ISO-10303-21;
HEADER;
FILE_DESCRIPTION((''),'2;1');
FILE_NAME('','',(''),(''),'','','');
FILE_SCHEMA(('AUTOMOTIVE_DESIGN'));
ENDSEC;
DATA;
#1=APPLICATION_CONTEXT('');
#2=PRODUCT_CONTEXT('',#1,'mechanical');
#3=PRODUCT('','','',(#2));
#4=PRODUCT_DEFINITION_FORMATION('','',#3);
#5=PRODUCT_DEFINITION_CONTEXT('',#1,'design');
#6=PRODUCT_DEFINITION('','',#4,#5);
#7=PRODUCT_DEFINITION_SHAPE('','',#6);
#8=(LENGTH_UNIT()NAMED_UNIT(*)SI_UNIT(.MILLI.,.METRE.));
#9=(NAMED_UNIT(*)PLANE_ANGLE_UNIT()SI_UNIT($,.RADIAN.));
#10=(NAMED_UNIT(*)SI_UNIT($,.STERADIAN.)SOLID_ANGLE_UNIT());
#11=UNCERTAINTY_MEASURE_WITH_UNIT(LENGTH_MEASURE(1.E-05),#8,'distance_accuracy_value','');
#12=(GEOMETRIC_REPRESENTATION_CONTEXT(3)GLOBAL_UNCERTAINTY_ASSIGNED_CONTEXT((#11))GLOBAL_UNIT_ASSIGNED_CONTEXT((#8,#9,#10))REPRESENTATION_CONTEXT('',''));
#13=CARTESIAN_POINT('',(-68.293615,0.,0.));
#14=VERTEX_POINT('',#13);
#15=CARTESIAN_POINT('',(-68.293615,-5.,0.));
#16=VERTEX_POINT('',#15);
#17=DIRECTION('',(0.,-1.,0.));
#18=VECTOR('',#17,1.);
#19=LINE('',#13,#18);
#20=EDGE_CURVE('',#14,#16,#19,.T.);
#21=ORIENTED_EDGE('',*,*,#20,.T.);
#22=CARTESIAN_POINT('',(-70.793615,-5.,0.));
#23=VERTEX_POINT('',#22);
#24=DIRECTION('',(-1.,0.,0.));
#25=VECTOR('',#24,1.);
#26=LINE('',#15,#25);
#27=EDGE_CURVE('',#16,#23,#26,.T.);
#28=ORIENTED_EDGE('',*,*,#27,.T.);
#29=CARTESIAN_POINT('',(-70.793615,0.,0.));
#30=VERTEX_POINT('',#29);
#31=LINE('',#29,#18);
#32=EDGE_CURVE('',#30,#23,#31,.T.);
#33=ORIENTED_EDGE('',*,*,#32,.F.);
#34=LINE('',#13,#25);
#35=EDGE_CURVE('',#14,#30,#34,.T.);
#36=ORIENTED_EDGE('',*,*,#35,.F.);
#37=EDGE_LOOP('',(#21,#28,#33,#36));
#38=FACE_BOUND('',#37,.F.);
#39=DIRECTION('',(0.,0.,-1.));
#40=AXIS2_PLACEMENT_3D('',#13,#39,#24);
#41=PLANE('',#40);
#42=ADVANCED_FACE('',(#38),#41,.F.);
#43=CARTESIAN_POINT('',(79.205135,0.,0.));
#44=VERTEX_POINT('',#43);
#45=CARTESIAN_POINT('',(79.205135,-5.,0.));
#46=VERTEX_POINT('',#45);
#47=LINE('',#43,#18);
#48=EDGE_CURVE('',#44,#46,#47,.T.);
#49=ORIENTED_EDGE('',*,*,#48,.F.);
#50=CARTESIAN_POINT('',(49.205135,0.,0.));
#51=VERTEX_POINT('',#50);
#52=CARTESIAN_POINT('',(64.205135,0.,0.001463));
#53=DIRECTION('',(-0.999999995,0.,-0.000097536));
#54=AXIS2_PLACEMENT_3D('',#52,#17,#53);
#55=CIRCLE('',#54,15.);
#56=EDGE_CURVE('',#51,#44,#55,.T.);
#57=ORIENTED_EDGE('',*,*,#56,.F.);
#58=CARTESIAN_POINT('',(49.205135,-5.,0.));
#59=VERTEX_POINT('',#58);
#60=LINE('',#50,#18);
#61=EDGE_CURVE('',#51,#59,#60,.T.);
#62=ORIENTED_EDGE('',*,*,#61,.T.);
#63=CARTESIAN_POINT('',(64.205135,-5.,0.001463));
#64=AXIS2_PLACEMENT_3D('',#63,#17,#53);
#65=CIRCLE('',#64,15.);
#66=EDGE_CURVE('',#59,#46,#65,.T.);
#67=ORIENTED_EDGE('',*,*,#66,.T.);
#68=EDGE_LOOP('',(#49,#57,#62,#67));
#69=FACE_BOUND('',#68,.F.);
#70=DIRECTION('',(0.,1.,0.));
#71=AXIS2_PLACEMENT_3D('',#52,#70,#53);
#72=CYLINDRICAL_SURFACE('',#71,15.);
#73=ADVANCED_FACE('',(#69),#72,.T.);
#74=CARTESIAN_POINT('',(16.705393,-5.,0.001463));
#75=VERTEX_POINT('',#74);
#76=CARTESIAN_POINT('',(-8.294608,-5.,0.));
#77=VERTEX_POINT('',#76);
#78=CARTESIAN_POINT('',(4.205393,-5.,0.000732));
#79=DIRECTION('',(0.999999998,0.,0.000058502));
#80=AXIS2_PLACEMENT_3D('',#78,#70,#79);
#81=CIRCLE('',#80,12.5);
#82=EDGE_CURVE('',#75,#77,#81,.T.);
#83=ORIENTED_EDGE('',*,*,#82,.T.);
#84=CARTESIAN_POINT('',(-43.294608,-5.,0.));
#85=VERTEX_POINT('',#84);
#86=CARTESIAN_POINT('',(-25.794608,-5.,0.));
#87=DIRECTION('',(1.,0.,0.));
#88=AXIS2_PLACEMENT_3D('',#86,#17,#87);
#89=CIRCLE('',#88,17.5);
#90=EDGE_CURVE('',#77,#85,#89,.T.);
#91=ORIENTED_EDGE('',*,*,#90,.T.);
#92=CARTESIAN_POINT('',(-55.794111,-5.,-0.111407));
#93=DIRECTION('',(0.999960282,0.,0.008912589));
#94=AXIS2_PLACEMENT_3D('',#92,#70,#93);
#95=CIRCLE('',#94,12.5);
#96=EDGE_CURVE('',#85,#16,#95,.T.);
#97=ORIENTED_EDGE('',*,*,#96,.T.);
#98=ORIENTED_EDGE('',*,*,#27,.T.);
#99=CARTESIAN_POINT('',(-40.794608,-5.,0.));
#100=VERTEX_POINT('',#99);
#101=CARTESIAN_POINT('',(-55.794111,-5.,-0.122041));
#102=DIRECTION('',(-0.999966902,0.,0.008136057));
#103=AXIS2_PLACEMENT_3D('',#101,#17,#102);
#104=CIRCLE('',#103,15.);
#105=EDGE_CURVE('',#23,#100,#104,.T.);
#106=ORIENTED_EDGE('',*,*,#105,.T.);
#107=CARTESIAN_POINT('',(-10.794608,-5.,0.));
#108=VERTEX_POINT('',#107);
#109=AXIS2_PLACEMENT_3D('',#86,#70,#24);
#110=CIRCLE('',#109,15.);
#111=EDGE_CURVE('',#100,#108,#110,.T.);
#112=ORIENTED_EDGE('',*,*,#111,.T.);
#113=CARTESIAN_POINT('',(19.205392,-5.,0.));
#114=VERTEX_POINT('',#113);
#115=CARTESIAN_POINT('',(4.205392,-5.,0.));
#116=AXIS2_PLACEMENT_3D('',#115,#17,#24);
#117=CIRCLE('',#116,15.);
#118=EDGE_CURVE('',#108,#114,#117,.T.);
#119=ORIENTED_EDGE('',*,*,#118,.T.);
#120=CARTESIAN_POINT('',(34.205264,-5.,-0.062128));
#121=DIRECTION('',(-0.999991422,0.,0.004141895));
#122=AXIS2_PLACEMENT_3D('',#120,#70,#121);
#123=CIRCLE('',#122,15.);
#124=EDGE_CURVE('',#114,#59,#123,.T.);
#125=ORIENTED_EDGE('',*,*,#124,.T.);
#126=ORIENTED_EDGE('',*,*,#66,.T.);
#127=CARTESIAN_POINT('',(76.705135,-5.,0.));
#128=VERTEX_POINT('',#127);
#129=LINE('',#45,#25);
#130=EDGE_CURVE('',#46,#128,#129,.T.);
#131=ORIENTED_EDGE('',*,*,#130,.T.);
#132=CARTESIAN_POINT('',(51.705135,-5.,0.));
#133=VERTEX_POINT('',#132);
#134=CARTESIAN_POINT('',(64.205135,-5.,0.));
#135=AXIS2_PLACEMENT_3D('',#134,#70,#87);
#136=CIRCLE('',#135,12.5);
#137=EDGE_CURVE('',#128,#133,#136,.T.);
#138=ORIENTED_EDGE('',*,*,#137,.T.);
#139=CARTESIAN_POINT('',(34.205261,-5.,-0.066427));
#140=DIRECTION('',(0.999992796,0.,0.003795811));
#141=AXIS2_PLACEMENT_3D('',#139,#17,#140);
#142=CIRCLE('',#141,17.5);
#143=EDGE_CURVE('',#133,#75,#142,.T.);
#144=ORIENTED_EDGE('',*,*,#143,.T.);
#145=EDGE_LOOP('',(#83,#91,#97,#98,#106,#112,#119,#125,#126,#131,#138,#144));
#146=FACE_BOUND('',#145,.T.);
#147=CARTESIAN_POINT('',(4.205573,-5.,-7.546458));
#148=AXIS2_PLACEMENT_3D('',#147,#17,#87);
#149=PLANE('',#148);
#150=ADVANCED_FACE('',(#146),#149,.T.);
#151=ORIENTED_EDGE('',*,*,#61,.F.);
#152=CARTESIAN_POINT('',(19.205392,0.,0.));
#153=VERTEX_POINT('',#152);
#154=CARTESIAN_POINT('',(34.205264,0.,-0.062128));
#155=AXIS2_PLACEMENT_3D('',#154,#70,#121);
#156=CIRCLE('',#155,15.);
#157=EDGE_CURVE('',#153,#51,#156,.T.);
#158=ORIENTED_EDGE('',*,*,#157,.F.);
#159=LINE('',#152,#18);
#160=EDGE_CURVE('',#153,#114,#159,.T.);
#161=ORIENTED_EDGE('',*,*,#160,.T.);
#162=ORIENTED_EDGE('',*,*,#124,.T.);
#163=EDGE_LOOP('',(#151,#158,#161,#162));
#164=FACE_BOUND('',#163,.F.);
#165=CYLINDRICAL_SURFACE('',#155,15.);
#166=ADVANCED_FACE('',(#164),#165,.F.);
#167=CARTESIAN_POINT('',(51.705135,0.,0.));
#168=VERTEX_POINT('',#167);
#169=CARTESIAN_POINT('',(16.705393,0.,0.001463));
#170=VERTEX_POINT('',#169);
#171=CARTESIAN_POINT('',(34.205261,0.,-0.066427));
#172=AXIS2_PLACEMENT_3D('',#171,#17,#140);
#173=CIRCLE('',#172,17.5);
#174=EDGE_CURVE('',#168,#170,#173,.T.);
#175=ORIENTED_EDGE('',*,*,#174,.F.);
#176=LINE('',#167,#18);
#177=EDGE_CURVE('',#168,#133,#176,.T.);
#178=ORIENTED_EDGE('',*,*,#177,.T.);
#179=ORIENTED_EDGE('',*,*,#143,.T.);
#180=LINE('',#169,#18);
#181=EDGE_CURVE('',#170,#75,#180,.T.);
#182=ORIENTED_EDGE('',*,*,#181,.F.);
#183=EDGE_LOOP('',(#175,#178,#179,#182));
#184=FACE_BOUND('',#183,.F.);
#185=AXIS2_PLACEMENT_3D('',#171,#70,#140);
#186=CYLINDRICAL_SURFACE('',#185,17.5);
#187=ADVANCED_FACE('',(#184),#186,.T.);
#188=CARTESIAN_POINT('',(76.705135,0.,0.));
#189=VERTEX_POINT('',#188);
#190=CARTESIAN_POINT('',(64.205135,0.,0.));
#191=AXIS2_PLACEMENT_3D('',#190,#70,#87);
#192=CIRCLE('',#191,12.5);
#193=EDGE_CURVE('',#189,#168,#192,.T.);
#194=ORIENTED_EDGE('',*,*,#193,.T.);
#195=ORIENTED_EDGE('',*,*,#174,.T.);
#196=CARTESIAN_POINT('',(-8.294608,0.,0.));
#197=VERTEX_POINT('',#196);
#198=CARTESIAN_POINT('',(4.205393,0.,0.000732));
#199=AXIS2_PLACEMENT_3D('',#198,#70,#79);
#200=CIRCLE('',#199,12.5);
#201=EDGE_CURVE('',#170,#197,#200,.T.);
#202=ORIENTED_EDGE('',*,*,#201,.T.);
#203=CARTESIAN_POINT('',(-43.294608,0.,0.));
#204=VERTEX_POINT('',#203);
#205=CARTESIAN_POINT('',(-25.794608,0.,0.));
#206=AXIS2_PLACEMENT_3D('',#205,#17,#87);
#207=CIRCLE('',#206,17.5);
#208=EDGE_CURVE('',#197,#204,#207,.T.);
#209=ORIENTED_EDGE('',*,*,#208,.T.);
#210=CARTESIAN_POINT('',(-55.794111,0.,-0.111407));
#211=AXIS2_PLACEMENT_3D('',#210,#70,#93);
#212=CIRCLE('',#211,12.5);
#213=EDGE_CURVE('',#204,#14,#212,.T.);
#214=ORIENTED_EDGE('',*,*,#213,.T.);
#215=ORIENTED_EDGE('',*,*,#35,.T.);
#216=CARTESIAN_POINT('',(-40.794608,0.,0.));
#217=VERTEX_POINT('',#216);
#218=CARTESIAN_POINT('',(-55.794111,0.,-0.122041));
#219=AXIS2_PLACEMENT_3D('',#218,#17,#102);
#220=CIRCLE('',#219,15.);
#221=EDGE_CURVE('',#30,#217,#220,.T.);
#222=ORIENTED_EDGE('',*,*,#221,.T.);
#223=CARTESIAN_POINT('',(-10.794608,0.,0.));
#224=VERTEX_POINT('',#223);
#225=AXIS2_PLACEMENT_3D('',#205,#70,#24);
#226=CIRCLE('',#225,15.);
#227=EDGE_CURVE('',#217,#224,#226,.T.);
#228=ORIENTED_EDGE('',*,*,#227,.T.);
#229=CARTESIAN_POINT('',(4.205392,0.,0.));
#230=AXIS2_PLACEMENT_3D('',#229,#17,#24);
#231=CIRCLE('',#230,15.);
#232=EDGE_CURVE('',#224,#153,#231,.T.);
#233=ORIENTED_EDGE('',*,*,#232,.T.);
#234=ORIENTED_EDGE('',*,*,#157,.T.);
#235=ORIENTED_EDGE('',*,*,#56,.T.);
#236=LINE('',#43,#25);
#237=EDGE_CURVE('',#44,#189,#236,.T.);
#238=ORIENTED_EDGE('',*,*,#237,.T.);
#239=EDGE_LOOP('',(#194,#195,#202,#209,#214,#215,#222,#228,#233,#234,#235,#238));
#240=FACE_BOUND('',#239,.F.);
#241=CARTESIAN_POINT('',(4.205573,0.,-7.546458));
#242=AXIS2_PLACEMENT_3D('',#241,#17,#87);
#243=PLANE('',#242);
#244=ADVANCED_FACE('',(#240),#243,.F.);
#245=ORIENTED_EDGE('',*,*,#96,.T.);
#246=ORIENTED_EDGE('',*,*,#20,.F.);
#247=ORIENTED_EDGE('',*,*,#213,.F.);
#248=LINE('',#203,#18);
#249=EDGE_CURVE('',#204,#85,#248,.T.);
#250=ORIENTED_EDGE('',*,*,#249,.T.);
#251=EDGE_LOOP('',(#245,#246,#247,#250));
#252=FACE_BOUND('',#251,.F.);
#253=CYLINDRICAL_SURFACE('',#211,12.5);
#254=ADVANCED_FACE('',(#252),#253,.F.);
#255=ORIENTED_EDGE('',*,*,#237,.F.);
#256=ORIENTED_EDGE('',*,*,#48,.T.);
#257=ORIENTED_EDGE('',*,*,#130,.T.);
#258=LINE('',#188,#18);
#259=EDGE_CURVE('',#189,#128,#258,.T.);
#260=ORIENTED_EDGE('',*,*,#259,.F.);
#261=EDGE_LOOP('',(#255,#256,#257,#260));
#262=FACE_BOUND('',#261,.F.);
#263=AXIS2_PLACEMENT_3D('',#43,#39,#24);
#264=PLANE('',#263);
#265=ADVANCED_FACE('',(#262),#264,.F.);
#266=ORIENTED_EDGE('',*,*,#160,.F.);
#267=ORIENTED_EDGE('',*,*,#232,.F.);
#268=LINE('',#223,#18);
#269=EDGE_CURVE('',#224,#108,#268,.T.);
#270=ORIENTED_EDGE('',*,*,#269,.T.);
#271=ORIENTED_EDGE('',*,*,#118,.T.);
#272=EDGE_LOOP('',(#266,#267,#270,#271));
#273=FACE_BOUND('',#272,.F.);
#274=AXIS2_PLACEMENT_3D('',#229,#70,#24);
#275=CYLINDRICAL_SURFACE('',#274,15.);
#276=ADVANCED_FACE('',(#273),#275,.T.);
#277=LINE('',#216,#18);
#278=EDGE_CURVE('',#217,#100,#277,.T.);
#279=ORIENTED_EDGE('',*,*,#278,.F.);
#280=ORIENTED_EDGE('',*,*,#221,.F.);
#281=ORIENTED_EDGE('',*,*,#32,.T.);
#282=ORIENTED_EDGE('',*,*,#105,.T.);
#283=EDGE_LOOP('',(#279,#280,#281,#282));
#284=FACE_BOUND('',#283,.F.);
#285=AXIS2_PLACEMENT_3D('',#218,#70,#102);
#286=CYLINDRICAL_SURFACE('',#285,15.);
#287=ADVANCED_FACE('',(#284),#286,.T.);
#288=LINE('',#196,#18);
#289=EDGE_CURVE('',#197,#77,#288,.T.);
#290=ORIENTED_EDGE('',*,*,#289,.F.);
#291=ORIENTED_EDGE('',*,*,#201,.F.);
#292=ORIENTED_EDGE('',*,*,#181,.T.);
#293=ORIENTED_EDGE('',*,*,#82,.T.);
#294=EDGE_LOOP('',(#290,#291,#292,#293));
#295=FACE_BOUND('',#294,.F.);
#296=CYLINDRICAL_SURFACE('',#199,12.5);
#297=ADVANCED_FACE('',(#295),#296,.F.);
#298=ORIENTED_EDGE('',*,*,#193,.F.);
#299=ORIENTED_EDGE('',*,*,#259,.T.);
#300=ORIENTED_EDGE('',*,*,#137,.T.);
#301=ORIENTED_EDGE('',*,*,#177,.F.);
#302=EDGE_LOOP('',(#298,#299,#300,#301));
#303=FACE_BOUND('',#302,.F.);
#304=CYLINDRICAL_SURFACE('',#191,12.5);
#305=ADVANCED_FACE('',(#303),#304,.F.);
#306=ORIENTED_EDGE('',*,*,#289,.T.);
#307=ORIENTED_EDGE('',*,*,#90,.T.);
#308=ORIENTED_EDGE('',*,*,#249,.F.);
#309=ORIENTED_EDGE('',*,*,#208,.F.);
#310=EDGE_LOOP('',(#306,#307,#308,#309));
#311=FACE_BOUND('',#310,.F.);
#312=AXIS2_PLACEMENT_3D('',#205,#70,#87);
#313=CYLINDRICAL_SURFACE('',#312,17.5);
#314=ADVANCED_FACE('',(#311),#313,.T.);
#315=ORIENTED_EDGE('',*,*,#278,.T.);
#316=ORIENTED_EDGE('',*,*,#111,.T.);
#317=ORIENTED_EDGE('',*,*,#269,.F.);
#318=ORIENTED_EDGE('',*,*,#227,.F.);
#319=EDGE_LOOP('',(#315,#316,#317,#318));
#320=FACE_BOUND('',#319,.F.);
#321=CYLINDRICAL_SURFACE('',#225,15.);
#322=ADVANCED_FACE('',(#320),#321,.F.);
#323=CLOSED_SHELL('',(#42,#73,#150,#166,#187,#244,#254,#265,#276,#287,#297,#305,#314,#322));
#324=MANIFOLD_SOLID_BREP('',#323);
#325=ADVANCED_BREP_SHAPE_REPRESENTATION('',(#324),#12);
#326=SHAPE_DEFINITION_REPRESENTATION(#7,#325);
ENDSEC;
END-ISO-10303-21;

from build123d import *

# Parameters (mm, degrees)
F1_DEPTH = 5


# Not quite as in the source:
# - ends of sketch curves that miss each other by under 0.0002 mm in the source are joined


with BuildPart() as f1:
    # F0 (on Front) → F1 (new body)
    with BuildSketch(Plane.XZ):
        with BuildLine():
            Line((-8.2946076301, 0), (-10.7946076301, 0))
            ThreePointArc((-10.7946076301, 0), (4.2053923699, -15), (19.2053923699, 0))
            Line((19.2053923699, 0), (16.705392798, 0.0014630326))
            ThreePointArc((16.705392798, 0.0014630326), (4.2061241002, -12.4992684623), (-8.2946076301, 0))
        make_face()
        with BuildLine():
            ThreePointArc((-40.7946076301, 0), (-25.7946076301, 15), (-10.7946076301, 0))
            Line((-10.7946076301, 0), (-8.2946076301, 0))
            ThreePointArc((-8.2946076301, 0), (-25.7946076301, 17.5), (-43.2946076301, 0))
            Line((-43.2946076301, 0), (-40.7946076301, 0))
        make_face()
        with BuildLine():
            ThreePointArc((-70.7936146824, 0), (-55.7941111563, -15.1220408499), (-40.7946076301, 0))
            Line((-40.7946076301, 0), (-43.2946076301, 0))
            ThreePointArc((-43.2946076301, 0), (-55.7941111563, -12.6114073597), (-68.2936146824, 0))
            Line((-68.2936146824, 0), (-70.7936146824, 0))
        make_face()
        with BuildLine():
            Line((16.705392798, 0.0014630326), (19.2053923699, 0))
            ThreePointArc((19.2053923699, 0), (34.2052637046, 14.9378715725), (49.2051350393, 0))
            Line((49.2051350393, 0), (51.7051350393, 0))
            ThreePointArc((51.7051350393, 0), (34.205992633, 17.4335732975), (16.705392798, 0.0014630326))
        make_face()
        with BuildLine():
            Line((51.7051350393, 0), (49.2051350393, 0))
            ThreePointArc((49.2051350393, 0), (50.4551350393, -0.0521740711), (51.7051350393, 0))
        make_face()
        with BuildLine():
            ThreePointArc((51.7051350393, 0), (50.4551350393, -0.0521740711), (49.2051350393, 0))
            ThreePointArc((49.2051350393, 0), (64.205134968, -14.9985369674), (79.2051348966, 0))
            Line((79.2051348966, 0), (76.7051348966, 0))
            ThreePointArc((76.705134968, 0), (64.205134968, -12.5), (51.705134968, 0))
        make_face()
    extrude(amount=F1_DEPTH)


solid = f1.part
